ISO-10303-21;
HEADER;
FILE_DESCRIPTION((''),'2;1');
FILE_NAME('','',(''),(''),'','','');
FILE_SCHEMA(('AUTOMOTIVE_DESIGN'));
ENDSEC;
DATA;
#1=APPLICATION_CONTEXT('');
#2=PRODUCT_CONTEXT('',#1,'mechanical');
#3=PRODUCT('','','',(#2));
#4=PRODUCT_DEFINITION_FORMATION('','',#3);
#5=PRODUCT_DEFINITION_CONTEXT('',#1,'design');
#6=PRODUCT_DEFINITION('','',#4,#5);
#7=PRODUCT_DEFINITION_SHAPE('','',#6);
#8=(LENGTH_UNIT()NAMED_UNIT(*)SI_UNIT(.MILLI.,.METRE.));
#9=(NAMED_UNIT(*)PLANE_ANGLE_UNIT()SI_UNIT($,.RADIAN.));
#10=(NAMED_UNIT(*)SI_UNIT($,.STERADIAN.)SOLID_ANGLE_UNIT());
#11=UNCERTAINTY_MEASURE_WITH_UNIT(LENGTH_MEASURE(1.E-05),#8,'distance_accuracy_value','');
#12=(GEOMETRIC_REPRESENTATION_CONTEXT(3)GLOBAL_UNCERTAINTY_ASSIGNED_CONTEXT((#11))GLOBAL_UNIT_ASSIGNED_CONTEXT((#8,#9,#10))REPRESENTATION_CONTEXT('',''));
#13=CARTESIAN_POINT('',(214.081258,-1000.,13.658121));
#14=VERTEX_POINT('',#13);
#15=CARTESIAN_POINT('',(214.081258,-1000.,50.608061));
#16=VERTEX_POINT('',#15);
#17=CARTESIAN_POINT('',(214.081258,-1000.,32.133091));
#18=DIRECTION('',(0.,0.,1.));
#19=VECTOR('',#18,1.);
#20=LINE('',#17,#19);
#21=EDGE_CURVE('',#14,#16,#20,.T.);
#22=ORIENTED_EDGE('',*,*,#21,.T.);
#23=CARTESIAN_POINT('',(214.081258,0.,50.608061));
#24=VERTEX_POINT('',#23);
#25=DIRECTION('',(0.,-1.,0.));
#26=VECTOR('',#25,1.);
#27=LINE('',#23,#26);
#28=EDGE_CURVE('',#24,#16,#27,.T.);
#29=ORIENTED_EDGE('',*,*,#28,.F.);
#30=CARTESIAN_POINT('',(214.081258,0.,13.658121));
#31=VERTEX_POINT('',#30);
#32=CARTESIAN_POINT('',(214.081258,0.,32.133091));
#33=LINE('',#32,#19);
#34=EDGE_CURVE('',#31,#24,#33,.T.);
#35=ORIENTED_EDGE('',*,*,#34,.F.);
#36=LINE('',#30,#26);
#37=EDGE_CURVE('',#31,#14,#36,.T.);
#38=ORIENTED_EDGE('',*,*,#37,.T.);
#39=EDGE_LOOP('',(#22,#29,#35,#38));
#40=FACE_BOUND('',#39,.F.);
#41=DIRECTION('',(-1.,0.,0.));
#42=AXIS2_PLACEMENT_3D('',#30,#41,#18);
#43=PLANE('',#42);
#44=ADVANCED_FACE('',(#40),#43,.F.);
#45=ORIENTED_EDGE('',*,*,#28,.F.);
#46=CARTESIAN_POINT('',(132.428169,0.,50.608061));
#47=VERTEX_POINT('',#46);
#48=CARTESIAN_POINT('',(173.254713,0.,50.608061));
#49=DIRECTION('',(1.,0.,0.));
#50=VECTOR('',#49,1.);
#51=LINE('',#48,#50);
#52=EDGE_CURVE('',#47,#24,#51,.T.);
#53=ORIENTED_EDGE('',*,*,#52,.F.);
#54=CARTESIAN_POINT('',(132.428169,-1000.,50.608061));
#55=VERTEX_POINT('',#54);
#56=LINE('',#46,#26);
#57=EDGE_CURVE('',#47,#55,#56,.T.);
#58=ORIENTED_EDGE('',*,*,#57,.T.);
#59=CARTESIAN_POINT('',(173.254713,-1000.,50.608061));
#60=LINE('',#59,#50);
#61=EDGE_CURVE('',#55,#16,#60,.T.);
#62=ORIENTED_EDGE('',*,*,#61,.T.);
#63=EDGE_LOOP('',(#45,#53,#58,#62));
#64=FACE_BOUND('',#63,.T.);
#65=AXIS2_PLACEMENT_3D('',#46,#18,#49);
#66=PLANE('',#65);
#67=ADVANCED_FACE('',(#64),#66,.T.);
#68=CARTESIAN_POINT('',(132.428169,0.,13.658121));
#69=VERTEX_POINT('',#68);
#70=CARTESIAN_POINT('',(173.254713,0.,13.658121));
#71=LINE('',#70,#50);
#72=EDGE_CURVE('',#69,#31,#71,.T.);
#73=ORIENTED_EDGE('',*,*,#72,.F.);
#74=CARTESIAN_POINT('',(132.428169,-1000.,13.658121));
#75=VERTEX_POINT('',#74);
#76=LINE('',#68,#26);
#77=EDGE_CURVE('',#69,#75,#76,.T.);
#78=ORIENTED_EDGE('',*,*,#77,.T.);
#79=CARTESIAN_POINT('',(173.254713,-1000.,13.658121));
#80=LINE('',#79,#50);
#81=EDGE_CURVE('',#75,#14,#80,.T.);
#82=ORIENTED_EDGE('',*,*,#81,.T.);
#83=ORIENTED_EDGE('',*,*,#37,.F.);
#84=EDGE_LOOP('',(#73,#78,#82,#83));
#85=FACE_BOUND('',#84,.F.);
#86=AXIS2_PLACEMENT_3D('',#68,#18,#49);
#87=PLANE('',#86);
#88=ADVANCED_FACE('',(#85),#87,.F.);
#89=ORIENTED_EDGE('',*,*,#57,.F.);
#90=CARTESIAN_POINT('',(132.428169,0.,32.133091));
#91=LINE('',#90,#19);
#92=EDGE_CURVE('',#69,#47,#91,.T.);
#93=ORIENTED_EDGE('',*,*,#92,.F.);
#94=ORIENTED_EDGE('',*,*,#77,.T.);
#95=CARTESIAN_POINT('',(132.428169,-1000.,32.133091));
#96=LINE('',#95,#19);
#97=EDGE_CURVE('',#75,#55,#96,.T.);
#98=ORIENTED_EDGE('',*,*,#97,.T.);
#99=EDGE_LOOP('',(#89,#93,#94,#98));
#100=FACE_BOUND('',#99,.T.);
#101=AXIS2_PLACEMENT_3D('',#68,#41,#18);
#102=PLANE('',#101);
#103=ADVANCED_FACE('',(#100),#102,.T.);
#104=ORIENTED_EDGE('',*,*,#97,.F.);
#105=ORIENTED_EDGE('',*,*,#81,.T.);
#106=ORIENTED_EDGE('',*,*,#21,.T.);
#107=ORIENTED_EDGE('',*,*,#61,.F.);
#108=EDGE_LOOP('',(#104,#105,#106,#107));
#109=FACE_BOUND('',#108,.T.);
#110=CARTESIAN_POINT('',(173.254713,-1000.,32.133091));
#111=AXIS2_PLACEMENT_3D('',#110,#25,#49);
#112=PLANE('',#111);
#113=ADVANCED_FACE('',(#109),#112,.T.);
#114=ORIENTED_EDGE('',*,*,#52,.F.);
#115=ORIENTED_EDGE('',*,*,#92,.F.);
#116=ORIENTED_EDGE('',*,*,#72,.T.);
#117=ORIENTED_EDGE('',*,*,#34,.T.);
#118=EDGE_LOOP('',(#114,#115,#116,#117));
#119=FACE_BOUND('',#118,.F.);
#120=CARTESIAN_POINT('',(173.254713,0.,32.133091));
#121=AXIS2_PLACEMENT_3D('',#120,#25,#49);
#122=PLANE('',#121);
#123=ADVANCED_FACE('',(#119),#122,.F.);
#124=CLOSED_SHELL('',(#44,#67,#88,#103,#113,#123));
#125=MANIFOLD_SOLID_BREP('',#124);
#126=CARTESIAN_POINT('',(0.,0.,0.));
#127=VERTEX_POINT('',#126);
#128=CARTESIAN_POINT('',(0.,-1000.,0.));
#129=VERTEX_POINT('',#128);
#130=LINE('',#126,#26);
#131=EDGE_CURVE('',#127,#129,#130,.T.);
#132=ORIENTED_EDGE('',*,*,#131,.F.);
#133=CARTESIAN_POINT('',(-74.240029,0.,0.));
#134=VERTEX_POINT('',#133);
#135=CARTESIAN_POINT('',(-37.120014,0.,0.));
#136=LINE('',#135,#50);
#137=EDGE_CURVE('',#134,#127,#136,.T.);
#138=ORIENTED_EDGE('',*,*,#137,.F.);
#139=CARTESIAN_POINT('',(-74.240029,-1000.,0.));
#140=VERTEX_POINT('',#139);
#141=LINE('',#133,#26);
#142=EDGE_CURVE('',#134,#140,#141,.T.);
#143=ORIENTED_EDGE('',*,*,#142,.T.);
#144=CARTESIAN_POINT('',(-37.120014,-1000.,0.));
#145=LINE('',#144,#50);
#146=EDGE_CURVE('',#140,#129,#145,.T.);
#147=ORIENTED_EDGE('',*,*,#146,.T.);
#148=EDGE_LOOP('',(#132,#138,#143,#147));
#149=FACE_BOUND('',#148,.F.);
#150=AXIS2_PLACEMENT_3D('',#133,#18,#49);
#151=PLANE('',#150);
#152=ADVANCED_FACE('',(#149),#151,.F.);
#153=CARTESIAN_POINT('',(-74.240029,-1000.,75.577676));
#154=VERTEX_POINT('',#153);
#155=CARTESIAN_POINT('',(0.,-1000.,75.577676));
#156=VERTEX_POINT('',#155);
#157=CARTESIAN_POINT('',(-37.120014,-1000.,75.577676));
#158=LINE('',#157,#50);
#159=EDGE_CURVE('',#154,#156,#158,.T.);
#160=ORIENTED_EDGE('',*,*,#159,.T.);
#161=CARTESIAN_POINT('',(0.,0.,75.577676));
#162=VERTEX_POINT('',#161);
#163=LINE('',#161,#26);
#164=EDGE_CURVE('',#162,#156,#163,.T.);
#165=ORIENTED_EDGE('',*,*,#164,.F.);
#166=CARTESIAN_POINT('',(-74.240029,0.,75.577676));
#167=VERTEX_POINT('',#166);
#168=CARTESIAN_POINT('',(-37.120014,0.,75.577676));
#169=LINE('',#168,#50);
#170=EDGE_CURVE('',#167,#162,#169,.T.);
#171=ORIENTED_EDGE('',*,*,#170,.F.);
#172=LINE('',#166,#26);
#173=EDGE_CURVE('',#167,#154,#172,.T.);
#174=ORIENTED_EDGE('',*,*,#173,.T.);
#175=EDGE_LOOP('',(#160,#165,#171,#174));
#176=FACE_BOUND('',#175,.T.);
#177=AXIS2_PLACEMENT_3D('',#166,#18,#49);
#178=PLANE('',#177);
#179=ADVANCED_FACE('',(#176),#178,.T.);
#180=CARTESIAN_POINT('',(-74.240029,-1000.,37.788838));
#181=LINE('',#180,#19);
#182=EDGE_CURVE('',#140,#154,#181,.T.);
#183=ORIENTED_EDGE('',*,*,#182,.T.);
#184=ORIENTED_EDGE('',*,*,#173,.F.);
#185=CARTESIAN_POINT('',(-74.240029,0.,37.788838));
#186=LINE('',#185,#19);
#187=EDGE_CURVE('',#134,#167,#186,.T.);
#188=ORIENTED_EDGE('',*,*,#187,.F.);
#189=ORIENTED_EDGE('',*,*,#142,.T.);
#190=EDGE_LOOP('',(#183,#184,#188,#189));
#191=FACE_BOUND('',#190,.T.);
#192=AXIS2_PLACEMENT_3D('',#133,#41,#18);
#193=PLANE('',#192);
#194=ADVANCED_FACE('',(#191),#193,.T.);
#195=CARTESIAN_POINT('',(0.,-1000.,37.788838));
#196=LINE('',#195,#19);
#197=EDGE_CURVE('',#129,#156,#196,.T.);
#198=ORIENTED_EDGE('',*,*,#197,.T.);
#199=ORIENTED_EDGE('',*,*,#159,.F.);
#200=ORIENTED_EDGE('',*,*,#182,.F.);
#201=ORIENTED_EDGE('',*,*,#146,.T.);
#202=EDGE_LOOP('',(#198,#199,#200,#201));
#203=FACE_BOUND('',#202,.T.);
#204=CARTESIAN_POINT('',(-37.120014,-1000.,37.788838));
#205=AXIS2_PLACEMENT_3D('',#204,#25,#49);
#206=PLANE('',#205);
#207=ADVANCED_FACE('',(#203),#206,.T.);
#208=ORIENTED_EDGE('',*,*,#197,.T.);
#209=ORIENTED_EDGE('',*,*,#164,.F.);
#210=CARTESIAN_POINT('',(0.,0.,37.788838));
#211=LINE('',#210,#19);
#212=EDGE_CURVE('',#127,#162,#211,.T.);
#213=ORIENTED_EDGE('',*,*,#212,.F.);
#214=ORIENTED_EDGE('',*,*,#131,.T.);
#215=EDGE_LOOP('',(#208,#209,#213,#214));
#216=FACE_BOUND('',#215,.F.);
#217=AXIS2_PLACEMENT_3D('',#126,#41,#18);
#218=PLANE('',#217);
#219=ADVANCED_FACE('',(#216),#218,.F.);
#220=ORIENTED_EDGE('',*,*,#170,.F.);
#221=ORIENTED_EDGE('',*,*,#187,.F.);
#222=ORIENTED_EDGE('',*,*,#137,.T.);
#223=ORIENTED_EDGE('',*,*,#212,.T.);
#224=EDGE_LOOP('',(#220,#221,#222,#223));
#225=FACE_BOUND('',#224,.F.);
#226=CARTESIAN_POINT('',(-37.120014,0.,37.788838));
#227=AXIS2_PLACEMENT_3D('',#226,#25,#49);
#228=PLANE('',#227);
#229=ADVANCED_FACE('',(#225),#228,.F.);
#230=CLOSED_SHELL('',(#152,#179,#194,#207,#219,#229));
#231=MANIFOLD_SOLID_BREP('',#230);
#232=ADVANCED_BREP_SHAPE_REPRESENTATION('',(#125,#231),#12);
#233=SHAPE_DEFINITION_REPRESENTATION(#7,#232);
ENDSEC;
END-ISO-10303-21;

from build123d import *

# Parameters (mm, degrees)
F0_W     = 74.2400288582
F0_H     = 75.5776762962
F1_DEPTH = 1000
F0_W_2   = 81.6530883312
F0_H_2   = 36.9499400258


# Not quite as in the source:
# - a feature of the source that left no trace in its solid (it failed there, or was rolled back) is left out


with BuildPart() as f1:
    # F0 (on Front) → F1 (new body)
    with BuildSketch(Plane.XZ):
        with Locations((-37.1200144291, 37.7888381481)):
            Rectangle(F0_W, F0_H)
    extrude(amount=F1_DEPTH)


with BuildPart() as f1b:
    # F0 (on Front) → F1, piece 2 (new body)
    with BuildSketch(Plane.XZ):
        with Locations((173.2547134161, 32.1330912411)):
            Rectangle(F0_W_2, F0_H_2)
    extrude(amount=F1_DEPTH)


solid = Compound([f1.part, f1b.part])
